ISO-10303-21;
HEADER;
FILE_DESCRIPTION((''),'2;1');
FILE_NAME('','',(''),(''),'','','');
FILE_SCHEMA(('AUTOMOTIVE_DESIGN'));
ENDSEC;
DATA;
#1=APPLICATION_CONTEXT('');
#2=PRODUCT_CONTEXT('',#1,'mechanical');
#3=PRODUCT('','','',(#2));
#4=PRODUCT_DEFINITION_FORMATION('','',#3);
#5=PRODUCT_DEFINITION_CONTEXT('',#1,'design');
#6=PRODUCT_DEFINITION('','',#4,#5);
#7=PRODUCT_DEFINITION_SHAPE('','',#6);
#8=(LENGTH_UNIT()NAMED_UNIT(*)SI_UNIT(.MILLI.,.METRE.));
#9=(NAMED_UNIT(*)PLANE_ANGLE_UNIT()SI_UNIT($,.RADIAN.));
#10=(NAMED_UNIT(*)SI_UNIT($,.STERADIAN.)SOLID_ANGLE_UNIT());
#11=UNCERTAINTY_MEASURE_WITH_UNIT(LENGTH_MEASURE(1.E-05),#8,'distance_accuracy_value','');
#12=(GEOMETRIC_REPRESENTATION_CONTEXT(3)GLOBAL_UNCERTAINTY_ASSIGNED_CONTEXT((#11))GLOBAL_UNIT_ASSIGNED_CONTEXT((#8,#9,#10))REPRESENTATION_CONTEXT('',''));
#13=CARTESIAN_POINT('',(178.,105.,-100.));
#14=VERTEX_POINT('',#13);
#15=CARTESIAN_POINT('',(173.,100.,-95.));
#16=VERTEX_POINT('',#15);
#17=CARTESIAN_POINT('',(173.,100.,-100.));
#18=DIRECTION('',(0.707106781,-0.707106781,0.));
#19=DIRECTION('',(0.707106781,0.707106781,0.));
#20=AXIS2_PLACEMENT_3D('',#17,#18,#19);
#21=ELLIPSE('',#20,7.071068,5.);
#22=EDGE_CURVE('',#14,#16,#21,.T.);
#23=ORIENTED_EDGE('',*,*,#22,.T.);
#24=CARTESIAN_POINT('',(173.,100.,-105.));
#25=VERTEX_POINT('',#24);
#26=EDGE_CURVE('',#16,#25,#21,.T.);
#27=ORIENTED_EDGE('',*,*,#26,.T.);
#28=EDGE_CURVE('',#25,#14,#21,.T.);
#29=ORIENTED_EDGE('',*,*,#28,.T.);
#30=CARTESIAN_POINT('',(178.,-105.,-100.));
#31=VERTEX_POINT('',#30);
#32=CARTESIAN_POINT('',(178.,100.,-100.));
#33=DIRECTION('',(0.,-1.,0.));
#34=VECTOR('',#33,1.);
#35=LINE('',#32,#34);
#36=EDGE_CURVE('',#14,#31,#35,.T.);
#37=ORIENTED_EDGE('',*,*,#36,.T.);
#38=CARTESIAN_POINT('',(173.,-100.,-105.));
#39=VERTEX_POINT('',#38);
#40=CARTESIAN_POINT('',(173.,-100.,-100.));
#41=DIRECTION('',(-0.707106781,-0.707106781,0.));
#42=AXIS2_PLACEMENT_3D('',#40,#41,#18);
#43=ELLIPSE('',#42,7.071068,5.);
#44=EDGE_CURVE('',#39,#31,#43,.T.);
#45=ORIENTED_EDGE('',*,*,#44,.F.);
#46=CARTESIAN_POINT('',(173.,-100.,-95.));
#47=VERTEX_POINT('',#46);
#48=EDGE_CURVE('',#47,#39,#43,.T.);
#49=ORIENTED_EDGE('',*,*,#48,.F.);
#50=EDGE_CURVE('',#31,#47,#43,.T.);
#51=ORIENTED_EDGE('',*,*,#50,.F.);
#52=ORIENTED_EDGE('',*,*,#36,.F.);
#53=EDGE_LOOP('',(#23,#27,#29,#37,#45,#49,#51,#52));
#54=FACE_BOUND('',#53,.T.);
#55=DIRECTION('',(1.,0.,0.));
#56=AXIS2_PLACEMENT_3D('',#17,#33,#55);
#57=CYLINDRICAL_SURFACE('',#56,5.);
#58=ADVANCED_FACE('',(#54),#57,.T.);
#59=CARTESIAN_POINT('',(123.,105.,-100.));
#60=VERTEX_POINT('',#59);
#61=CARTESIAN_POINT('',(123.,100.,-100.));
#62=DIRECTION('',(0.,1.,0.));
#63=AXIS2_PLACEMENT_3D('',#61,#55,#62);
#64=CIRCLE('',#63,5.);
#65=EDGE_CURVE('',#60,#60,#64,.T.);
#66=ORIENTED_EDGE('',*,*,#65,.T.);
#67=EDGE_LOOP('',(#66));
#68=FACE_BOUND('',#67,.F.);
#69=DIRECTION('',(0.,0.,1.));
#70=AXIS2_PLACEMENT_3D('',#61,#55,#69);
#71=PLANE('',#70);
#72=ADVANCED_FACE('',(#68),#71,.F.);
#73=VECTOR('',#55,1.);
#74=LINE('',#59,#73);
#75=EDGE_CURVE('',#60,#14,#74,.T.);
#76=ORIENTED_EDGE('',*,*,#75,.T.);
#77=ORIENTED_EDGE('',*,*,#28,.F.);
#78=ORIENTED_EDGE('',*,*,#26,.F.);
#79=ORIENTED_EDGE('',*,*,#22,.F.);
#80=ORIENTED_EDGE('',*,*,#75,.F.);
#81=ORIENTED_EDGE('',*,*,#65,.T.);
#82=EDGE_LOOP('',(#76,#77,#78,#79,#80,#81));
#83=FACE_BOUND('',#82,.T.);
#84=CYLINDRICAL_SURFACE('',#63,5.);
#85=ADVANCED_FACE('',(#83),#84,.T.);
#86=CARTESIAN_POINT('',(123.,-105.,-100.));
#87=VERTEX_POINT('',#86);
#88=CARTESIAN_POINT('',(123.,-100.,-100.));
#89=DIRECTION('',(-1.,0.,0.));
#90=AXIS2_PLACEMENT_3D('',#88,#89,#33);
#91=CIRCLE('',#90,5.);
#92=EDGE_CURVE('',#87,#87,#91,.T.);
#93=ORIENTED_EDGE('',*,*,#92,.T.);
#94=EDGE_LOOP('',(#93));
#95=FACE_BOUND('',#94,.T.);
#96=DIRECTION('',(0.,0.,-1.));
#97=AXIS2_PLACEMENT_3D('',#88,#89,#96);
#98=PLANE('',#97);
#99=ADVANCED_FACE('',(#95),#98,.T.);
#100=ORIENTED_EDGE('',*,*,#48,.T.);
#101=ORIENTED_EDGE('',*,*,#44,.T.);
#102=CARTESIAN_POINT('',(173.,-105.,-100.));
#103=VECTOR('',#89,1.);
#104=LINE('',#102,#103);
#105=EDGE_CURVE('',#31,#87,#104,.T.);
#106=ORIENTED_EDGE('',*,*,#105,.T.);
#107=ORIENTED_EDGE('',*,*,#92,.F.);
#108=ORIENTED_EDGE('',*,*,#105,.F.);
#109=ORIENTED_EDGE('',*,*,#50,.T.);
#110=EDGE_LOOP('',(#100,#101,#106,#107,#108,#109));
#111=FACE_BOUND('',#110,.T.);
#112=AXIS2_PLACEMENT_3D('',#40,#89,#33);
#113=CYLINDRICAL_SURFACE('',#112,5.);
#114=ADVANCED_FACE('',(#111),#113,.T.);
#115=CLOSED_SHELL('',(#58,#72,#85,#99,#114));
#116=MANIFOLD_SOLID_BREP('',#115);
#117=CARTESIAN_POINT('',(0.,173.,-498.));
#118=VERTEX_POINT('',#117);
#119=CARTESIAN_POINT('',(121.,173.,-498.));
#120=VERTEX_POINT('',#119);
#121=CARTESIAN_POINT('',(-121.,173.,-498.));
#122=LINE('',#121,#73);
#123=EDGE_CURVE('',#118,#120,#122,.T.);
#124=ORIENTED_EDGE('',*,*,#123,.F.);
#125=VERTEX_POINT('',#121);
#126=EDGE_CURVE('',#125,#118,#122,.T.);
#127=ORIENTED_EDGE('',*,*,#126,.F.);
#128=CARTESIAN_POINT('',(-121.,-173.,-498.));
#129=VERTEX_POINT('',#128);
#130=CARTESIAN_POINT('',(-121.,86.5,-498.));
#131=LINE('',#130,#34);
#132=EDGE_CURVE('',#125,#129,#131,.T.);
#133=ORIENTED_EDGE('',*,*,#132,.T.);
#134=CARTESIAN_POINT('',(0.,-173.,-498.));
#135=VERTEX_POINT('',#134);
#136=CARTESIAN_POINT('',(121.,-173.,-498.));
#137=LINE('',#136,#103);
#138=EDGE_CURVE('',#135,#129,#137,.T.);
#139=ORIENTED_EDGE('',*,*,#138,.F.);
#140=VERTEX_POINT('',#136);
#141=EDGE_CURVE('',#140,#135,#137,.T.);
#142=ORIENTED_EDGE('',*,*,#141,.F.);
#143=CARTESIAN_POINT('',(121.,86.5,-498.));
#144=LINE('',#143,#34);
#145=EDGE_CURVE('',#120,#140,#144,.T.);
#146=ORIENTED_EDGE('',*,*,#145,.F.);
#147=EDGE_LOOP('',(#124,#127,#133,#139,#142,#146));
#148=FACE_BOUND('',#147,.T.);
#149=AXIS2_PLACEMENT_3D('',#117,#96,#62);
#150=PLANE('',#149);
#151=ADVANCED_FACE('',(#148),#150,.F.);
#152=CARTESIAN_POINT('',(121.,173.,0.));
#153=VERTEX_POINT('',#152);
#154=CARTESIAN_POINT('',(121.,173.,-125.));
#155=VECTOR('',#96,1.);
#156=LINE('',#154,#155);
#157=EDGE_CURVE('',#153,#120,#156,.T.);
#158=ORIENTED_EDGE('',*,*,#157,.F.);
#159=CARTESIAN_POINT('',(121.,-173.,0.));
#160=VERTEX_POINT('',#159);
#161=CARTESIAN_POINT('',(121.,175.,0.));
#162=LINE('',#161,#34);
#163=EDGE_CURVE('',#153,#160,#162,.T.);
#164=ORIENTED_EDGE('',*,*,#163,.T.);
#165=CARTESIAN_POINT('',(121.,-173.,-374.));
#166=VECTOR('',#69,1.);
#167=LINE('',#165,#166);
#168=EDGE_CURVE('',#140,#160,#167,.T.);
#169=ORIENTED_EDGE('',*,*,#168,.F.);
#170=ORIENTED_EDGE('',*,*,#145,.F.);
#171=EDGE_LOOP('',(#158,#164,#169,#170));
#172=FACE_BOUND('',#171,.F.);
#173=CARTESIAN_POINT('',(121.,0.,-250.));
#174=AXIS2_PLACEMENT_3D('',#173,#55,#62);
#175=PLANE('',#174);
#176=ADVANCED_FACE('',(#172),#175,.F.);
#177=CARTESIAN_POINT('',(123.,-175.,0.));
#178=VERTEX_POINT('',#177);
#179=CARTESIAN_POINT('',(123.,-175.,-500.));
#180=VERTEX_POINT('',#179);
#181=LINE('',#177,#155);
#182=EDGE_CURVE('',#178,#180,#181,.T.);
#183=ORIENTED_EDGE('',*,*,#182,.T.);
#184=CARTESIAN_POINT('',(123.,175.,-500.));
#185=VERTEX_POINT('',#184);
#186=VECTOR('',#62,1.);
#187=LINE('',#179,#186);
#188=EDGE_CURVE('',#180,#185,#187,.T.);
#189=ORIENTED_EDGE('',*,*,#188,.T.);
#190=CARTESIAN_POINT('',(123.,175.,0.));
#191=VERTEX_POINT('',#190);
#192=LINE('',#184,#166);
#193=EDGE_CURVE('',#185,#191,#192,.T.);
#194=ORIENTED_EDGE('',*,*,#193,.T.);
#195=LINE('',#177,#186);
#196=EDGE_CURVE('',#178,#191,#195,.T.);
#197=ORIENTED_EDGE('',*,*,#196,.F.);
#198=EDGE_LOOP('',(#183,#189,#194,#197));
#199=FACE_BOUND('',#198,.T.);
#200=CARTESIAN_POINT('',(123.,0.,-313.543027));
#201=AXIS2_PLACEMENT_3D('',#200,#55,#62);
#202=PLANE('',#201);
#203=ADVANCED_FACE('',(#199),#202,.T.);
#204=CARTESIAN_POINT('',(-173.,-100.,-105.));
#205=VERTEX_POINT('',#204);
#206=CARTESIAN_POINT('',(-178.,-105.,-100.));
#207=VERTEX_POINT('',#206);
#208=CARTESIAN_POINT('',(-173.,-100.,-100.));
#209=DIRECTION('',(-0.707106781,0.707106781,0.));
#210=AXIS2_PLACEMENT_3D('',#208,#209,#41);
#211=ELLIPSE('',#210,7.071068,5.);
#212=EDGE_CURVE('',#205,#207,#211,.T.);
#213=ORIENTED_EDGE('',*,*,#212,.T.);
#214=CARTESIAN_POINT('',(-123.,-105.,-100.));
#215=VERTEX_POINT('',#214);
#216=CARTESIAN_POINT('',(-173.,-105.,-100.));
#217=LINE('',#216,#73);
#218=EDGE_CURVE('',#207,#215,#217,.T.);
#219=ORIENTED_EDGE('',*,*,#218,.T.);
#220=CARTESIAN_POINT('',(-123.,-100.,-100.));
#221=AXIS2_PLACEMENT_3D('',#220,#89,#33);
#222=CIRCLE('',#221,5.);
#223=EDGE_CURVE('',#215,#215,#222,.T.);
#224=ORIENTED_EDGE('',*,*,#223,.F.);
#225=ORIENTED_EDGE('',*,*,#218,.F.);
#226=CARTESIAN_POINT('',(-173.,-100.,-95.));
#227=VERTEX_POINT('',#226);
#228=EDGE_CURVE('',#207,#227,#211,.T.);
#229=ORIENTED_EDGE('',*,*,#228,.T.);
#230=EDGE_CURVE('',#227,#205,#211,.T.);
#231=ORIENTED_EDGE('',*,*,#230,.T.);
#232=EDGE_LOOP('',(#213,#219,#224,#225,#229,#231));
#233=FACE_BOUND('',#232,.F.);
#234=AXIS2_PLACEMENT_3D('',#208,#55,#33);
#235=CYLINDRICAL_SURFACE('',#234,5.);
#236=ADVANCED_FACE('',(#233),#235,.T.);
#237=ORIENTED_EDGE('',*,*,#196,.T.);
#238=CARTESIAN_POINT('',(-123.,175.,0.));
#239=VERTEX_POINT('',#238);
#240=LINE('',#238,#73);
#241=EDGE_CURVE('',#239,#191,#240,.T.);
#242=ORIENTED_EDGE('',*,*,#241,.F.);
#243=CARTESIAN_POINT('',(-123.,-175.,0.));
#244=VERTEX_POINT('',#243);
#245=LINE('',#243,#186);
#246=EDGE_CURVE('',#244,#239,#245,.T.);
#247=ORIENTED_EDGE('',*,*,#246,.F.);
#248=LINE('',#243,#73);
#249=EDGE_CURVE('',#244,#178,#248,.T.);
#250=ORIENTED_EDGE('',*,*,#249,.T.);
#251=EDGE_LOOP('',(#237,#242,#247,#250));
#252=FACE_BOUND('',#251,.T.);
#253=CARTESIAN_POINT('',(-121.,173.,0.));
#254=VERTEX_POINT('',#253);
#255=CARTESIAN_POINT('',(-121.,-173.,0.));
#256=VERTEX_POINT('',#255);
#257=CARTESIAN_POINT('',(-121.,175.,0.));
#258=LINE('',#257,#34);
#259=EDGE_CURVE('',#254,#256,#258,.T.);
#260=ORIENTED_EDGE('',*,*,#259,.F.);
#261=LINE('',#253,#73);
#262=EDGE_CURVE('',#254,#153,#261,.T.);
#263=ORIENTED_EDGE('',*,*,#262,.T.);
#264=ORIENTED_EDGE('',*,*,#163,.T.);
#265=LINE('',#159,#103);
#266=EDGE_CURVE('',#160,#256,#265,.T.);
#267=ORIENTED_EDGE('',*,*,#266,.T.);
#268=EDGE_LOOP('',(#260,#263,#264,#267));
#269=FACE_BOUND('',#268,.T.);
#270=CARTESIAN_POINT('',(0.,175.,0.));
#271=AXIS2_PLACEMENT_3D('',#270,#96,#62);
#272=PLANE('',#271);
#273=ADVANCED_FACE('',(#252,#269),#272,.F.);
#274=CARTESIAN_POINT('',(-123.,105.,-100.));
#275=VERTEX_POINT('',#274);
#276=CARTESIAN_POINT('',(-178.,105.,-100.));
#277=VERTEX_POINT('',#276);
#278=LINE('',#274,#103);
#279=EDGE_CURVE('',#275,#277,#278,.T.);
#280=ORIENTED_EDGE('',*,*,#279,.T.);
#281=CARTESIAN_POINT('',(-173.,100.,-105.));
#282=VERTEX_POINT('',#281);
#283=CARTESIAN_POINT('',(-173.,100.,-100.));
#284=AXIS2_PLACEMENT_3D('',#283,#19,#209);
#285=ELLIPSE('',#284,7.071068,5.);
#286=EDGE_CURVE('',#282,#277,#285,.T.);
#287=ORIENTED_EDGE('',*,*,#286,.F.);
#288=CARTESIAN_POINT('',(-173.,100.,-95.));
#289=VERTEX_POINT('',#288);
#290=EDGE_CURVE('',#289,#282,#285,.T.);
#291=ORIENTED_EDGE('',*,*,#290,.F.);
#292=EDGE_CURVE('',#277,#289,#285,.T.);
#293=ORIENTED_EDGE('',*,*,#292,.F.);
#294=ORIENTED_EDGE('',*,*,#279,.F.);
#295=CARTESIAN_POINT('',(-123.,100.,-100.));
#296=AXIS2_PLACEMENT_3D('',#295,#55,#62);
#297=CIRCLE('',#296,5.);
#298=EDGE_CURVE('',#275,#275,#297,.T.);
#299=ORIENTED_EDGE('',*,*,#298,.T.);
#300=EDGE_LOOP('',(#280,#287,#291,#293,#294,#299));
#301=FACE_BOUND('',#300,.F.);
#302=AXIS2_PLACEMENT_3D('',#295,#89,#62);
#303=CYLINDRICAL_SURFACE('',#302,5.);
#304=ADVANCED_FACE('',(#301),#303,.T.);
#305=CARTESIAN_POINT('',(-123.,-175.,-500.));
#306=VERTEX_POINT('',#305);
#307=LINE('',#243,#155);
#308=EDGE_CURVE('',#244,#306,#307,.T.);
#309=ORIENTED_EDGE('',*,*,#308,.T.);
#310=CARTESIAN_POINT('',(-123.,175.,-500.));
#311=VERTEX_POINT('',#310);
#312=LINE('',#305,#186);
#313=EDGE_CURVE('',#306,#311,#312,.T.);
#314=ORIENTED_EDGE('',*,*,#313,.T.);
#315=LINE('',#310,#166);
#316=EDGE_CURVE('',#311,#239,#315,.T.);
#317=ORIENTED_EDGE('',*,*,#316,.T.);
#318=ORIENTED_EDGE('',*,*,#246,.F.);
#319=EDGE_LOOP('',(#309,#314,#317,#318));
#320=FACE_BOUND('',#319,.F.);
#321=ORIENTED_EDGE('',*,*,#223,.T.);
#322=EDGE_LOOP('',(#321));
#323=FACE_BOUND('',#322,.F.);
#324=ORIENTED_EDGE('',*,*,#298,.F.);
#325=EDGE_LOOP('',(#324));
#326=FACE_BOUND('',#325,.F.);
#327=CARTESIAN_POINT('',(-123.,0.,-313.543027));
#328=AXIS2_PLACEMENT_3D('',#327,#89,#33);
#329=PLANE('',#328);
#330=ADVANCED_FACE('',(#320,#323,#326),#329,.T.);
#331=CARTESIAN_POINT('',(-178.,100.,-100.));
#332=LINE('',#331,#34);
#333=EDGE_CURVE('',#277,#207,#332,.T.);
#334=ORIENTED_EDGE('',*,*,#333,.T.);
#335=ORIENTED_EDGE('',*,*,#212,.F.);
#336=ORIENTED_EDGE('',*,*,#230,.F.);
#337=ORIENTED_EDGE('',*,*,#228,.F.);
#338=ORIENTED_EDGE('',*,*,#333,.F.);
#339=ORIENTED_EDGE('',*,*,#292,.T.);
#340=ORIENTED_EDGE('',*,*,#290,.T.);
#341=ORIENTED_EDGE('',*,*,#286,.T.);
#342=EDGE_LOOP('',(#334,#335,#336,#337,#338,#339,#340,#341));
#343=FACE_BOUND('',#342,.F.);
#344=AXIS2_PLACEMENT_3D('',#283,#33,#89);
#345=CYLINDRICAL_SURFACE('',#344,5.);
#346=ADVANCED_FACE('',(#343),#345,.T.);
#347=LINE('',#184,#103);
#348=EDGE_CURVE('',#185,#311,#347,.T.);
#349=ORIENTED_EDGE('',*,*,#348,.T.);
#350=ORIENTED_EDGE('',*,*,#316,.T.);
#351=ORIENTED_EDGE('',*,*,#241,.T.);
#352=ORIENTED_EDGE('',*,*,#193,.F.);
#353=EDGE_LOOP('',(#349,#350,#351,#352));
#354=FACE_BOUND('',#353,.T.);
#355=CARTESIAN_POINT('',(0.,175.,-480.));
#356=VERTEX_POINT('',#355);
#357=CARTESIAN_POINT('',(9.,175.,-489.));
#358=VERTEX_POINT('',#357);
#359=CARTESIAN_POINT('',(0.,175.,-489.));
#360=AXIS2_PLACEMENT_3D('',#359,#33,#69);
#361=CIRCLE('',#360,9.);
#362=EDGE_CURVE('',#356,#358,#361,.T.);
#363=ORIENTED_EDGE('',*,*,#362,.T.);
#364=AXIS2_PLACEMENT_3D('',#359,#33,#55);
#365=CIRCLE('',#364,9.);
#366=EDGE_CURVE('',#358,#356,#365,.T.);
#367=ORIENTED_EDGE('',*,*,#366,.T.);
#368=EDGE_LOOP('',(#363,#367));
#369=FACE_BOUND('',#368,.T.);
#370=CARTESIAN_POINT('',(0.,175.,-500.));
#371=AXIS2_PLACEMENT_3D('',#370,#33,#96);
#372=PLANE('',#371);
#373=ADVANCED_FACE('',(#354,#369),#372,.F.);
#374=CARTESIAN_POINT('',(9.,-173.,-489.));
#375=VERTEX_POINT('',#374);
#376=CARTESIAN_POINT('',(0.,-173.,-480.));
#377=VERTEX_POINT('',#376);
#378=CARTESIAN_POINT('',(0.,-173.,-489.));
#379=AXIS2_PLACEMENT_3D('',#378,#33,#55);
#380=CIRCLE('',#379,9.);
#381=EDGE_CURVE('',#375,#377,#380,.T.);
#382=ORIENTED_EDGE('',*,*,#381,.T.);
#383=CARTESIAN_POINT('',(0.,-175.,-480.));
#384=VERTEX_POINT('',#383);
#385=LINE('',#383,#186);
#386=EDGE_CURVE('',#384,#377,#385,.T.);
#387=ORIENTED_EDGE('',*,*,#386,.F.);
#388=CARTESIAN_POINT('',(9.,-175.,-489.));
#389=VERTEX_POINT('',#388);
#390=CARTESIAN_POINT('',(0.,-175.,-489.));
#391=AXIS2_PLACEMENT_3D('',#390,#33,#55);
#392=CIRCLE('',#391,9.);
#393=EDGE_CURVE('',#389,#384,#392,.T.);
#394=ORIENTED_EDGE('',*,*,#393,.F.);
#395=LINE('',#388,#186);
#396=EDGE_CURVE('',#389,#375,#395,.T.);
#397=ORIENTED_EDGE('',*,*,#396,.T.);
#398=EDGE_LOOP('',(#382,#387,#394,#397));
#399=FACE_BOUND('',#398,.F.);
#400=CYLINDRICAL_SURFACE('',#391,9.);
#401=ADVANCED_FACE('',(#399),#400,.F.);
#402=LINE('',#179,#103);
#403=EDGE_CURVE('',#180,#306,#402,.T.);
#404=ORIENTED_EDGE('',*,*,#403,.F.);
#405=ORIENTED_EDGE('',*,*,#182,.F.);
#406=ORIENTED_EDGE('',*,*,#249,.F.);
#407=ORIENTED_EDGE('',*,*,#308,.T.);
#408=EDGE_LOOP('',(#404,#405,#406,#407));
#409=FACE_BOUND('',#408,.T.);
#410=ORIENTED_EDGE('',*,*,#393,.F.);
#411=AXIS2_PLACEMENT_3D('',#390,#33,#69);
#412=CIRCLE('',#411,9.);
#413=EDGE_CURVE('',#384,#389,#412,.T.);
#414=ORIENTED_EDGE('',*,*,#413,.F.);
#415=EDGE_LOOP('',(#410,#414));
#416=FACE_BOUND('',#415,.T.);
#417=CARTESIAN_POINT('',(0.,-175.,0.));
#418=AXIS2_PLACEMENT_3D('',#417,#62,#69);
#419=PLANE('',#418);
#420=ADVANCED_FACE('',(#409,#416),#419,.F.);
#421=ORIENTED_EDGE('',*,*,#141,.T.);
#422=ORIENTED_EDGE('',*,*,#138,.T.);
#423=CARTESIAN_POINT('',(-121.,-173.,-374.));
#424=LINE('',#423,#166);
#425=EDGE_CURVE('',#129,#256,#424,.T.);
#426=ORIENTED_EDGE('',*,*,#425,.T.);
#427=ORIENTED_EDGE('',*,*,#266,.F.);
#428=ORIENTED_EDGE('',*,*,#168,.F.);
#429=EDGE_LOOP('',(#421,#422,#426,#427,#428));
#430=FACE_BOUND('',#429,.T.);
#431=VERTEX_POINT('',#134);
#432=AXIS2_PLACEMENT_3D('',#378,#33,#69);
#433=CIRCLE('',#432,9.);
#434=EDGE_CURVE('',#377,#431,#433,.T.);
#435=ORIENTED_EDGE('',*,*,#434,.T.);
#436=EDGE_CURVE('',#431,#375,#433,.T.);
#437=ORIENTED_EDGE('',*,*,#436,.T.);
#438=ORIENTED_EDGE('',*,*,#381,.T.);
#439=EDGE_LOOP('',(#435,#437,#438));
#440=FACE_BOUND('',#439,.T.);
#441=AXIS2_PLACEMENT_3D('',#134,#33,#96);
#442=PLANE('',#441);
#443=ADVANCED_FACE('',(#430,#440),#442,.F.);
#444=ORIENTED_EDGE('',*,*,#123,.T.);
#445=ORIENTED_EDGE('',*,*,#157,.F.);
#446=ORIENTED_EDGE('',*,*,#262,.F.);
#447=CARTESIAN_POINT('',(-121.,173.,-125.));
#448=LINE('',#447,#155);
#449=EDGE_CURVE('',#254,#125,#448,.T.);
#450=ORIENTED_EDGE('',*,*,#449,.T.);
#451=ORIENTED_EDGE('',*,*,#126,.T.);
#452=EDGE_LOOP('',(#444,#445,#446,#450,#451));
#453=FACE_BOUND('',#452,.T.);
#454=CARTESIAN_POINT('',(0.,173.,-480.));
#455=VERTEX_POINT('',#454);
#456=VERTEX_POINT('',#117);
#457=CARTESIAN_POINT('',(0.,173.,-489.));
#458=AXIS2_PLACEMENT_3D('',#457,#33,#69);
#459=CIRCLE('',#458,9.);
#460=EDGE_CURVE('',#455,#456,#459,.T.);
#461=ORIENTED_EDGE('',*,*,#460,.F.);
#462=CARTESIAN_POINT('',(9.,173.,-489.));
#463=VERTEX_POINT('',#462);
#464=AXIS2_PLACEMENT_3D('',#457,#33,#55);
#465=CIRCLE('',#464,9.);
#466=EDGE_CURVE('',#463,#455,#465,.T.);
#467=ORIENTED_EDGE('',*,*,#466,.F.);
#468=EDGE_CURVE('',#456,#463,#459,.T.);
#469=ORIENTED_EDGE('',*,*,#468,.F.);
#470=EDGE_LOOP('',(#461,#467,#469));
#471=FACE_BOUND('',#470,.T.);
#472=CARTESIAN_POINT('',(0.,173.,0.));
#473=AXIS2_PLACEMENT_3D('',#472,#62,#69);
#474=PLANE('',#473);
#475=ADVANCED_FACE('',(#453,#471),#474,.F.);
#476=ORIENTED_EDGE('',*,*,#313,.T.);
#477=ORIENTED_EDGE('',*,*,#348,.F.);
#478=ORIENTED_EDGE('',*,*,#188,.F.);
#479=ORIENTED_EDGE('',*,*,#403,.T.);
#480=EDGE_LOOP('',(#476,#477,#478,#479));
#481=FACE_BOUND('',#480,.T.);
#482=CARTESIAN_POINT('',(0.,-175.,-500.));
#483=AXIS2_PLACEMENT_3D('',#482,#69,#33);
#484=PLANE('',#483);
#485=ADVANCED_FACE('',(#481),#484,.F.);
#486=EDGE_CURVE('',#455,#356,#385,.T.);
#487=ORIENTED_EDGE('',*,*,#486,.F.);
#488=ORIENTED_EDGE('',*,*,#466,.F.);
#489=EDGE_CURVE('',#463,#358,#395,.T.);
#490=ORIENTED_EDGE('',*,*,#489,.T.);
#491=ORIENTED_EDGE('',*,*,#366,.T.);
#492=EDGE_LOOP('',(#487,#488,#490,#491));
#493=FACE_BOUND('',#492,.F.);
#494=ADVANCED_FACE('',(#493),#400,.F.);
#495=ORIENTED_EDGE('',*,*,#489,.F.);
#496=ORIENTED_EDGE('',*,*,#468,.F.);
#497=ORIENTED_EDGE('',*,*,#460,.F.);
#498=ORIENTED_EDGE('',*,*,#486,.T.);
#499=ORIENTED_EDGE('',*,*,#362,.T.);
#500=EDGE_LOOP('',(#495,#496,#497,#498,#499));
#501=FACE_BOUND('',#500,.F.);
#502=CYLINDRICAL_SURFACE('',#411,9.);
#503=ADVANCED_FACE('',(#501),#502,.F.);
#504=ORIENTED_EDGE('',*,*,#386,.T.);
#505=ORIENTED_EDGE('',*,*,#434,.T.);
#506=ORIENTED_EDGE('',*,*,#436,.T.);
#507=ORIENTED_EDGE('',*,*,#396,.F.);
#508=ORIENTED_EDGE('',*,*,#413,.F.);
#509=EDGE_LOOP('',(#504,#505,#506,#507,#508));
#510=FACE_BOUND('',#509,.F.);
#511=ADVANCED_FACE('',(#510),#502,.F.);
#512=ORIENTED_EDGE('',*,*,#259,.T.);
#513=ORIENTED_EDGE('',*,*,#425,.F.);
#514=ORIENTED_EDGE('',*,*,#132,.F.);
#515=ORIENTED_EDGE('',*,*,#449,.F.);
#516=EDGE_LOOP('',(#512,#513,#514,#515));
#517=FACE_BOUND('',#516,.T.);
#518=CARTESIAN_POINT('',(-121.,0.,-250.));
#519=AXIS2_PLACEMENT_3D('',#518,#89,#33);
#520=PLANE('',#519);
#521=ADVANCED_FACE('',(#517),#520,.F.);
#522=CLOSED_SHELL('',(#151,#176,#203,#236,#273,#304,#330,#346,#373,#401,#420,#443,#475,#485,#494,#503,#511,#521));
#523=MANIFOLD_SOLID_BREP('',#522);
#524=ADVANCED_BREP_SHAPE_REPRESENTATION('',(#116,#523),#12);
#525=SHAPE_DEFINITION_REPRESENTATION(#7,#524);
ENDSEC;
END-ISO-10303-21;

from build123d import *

# Parameters (mm, degrees)
F1_DEPTH  = 123
F4_DEPTH  = 2
F12_DEPTH = 500


# Not quite as in the source:
# - a feature names something its author has since deleted; it is built from what else it names


with BuildPart() as f1:
    # F0 (on Right) → F1 (new body)
    with BuildSketch(Plane.YZ):
        Polygon((175, -500), (175, 0), (173, 0), (173, -498), (-173, -498), (-173, 0), (-175, 0), (-175, -500), align=None)
    extrude(amount=F1_DEPTH)

    # F3 (on offset) → F4 (join)
    with BuildSketch(Plane.YZ.offset(123)):
        Polygon((175, 0), (0, 0), (-175, 0), (-175, -500), (175, -500), align=None)
    extrude(amount=-F4_DEPTH)

    # F9: F1, F8 across face


with BuildPart() as f8:
    # F8: sweep along a path in F7
    with BuildLine(Plane.XY.offset(-100)) as f8_path:
        Line((123, 100), (173, 100))
        Line((173, 100), (173, -100))
        Line((173, -100), (123, -100))
    # F5 (on offset) → F8 (sweep)
    with BuildSketch(Plane.YZ.offset(123)):
        with BuildLine():
            ThreePointArc((95, -100), (100, -105), (105, -100))
            ThreePointArc((105, -100), (100, -95), (95, -100))
        make_face()
    sweep(path=f8_path.line, transition=Transition.RIGHT)


with BuildPart() as f1_1:
    add(f1.part)
    add(f1.part.mirror(Plane(origin=(0, 0, -314.0074294205), x_dir=(0, 1, 0), z_dir=(-1, 0, 0))))
    add(f8.part.mirror(Plane(origin=(0, 0, -314.0074294205), x_dir=(0, 1, 0), z_dir=(-1, 0, 0))))

    # F11 (on offset) → F12 (cut)
    with BuildSketch(Plane.XZ.offset(175)):
        with BuildLine():
            ThreePointArc((0, -480), (-6.3639610307, -495.3639610307), (9, -489))
            ThreePointArc((9, -489), (6.3639610307, -482.6360389693), (0, -480))
        make_face()
    extrude(amount=-F12_DEPTH, mode=Mode.SUBTRACT)


solid = Compound([f8.part, f1_1.part])
